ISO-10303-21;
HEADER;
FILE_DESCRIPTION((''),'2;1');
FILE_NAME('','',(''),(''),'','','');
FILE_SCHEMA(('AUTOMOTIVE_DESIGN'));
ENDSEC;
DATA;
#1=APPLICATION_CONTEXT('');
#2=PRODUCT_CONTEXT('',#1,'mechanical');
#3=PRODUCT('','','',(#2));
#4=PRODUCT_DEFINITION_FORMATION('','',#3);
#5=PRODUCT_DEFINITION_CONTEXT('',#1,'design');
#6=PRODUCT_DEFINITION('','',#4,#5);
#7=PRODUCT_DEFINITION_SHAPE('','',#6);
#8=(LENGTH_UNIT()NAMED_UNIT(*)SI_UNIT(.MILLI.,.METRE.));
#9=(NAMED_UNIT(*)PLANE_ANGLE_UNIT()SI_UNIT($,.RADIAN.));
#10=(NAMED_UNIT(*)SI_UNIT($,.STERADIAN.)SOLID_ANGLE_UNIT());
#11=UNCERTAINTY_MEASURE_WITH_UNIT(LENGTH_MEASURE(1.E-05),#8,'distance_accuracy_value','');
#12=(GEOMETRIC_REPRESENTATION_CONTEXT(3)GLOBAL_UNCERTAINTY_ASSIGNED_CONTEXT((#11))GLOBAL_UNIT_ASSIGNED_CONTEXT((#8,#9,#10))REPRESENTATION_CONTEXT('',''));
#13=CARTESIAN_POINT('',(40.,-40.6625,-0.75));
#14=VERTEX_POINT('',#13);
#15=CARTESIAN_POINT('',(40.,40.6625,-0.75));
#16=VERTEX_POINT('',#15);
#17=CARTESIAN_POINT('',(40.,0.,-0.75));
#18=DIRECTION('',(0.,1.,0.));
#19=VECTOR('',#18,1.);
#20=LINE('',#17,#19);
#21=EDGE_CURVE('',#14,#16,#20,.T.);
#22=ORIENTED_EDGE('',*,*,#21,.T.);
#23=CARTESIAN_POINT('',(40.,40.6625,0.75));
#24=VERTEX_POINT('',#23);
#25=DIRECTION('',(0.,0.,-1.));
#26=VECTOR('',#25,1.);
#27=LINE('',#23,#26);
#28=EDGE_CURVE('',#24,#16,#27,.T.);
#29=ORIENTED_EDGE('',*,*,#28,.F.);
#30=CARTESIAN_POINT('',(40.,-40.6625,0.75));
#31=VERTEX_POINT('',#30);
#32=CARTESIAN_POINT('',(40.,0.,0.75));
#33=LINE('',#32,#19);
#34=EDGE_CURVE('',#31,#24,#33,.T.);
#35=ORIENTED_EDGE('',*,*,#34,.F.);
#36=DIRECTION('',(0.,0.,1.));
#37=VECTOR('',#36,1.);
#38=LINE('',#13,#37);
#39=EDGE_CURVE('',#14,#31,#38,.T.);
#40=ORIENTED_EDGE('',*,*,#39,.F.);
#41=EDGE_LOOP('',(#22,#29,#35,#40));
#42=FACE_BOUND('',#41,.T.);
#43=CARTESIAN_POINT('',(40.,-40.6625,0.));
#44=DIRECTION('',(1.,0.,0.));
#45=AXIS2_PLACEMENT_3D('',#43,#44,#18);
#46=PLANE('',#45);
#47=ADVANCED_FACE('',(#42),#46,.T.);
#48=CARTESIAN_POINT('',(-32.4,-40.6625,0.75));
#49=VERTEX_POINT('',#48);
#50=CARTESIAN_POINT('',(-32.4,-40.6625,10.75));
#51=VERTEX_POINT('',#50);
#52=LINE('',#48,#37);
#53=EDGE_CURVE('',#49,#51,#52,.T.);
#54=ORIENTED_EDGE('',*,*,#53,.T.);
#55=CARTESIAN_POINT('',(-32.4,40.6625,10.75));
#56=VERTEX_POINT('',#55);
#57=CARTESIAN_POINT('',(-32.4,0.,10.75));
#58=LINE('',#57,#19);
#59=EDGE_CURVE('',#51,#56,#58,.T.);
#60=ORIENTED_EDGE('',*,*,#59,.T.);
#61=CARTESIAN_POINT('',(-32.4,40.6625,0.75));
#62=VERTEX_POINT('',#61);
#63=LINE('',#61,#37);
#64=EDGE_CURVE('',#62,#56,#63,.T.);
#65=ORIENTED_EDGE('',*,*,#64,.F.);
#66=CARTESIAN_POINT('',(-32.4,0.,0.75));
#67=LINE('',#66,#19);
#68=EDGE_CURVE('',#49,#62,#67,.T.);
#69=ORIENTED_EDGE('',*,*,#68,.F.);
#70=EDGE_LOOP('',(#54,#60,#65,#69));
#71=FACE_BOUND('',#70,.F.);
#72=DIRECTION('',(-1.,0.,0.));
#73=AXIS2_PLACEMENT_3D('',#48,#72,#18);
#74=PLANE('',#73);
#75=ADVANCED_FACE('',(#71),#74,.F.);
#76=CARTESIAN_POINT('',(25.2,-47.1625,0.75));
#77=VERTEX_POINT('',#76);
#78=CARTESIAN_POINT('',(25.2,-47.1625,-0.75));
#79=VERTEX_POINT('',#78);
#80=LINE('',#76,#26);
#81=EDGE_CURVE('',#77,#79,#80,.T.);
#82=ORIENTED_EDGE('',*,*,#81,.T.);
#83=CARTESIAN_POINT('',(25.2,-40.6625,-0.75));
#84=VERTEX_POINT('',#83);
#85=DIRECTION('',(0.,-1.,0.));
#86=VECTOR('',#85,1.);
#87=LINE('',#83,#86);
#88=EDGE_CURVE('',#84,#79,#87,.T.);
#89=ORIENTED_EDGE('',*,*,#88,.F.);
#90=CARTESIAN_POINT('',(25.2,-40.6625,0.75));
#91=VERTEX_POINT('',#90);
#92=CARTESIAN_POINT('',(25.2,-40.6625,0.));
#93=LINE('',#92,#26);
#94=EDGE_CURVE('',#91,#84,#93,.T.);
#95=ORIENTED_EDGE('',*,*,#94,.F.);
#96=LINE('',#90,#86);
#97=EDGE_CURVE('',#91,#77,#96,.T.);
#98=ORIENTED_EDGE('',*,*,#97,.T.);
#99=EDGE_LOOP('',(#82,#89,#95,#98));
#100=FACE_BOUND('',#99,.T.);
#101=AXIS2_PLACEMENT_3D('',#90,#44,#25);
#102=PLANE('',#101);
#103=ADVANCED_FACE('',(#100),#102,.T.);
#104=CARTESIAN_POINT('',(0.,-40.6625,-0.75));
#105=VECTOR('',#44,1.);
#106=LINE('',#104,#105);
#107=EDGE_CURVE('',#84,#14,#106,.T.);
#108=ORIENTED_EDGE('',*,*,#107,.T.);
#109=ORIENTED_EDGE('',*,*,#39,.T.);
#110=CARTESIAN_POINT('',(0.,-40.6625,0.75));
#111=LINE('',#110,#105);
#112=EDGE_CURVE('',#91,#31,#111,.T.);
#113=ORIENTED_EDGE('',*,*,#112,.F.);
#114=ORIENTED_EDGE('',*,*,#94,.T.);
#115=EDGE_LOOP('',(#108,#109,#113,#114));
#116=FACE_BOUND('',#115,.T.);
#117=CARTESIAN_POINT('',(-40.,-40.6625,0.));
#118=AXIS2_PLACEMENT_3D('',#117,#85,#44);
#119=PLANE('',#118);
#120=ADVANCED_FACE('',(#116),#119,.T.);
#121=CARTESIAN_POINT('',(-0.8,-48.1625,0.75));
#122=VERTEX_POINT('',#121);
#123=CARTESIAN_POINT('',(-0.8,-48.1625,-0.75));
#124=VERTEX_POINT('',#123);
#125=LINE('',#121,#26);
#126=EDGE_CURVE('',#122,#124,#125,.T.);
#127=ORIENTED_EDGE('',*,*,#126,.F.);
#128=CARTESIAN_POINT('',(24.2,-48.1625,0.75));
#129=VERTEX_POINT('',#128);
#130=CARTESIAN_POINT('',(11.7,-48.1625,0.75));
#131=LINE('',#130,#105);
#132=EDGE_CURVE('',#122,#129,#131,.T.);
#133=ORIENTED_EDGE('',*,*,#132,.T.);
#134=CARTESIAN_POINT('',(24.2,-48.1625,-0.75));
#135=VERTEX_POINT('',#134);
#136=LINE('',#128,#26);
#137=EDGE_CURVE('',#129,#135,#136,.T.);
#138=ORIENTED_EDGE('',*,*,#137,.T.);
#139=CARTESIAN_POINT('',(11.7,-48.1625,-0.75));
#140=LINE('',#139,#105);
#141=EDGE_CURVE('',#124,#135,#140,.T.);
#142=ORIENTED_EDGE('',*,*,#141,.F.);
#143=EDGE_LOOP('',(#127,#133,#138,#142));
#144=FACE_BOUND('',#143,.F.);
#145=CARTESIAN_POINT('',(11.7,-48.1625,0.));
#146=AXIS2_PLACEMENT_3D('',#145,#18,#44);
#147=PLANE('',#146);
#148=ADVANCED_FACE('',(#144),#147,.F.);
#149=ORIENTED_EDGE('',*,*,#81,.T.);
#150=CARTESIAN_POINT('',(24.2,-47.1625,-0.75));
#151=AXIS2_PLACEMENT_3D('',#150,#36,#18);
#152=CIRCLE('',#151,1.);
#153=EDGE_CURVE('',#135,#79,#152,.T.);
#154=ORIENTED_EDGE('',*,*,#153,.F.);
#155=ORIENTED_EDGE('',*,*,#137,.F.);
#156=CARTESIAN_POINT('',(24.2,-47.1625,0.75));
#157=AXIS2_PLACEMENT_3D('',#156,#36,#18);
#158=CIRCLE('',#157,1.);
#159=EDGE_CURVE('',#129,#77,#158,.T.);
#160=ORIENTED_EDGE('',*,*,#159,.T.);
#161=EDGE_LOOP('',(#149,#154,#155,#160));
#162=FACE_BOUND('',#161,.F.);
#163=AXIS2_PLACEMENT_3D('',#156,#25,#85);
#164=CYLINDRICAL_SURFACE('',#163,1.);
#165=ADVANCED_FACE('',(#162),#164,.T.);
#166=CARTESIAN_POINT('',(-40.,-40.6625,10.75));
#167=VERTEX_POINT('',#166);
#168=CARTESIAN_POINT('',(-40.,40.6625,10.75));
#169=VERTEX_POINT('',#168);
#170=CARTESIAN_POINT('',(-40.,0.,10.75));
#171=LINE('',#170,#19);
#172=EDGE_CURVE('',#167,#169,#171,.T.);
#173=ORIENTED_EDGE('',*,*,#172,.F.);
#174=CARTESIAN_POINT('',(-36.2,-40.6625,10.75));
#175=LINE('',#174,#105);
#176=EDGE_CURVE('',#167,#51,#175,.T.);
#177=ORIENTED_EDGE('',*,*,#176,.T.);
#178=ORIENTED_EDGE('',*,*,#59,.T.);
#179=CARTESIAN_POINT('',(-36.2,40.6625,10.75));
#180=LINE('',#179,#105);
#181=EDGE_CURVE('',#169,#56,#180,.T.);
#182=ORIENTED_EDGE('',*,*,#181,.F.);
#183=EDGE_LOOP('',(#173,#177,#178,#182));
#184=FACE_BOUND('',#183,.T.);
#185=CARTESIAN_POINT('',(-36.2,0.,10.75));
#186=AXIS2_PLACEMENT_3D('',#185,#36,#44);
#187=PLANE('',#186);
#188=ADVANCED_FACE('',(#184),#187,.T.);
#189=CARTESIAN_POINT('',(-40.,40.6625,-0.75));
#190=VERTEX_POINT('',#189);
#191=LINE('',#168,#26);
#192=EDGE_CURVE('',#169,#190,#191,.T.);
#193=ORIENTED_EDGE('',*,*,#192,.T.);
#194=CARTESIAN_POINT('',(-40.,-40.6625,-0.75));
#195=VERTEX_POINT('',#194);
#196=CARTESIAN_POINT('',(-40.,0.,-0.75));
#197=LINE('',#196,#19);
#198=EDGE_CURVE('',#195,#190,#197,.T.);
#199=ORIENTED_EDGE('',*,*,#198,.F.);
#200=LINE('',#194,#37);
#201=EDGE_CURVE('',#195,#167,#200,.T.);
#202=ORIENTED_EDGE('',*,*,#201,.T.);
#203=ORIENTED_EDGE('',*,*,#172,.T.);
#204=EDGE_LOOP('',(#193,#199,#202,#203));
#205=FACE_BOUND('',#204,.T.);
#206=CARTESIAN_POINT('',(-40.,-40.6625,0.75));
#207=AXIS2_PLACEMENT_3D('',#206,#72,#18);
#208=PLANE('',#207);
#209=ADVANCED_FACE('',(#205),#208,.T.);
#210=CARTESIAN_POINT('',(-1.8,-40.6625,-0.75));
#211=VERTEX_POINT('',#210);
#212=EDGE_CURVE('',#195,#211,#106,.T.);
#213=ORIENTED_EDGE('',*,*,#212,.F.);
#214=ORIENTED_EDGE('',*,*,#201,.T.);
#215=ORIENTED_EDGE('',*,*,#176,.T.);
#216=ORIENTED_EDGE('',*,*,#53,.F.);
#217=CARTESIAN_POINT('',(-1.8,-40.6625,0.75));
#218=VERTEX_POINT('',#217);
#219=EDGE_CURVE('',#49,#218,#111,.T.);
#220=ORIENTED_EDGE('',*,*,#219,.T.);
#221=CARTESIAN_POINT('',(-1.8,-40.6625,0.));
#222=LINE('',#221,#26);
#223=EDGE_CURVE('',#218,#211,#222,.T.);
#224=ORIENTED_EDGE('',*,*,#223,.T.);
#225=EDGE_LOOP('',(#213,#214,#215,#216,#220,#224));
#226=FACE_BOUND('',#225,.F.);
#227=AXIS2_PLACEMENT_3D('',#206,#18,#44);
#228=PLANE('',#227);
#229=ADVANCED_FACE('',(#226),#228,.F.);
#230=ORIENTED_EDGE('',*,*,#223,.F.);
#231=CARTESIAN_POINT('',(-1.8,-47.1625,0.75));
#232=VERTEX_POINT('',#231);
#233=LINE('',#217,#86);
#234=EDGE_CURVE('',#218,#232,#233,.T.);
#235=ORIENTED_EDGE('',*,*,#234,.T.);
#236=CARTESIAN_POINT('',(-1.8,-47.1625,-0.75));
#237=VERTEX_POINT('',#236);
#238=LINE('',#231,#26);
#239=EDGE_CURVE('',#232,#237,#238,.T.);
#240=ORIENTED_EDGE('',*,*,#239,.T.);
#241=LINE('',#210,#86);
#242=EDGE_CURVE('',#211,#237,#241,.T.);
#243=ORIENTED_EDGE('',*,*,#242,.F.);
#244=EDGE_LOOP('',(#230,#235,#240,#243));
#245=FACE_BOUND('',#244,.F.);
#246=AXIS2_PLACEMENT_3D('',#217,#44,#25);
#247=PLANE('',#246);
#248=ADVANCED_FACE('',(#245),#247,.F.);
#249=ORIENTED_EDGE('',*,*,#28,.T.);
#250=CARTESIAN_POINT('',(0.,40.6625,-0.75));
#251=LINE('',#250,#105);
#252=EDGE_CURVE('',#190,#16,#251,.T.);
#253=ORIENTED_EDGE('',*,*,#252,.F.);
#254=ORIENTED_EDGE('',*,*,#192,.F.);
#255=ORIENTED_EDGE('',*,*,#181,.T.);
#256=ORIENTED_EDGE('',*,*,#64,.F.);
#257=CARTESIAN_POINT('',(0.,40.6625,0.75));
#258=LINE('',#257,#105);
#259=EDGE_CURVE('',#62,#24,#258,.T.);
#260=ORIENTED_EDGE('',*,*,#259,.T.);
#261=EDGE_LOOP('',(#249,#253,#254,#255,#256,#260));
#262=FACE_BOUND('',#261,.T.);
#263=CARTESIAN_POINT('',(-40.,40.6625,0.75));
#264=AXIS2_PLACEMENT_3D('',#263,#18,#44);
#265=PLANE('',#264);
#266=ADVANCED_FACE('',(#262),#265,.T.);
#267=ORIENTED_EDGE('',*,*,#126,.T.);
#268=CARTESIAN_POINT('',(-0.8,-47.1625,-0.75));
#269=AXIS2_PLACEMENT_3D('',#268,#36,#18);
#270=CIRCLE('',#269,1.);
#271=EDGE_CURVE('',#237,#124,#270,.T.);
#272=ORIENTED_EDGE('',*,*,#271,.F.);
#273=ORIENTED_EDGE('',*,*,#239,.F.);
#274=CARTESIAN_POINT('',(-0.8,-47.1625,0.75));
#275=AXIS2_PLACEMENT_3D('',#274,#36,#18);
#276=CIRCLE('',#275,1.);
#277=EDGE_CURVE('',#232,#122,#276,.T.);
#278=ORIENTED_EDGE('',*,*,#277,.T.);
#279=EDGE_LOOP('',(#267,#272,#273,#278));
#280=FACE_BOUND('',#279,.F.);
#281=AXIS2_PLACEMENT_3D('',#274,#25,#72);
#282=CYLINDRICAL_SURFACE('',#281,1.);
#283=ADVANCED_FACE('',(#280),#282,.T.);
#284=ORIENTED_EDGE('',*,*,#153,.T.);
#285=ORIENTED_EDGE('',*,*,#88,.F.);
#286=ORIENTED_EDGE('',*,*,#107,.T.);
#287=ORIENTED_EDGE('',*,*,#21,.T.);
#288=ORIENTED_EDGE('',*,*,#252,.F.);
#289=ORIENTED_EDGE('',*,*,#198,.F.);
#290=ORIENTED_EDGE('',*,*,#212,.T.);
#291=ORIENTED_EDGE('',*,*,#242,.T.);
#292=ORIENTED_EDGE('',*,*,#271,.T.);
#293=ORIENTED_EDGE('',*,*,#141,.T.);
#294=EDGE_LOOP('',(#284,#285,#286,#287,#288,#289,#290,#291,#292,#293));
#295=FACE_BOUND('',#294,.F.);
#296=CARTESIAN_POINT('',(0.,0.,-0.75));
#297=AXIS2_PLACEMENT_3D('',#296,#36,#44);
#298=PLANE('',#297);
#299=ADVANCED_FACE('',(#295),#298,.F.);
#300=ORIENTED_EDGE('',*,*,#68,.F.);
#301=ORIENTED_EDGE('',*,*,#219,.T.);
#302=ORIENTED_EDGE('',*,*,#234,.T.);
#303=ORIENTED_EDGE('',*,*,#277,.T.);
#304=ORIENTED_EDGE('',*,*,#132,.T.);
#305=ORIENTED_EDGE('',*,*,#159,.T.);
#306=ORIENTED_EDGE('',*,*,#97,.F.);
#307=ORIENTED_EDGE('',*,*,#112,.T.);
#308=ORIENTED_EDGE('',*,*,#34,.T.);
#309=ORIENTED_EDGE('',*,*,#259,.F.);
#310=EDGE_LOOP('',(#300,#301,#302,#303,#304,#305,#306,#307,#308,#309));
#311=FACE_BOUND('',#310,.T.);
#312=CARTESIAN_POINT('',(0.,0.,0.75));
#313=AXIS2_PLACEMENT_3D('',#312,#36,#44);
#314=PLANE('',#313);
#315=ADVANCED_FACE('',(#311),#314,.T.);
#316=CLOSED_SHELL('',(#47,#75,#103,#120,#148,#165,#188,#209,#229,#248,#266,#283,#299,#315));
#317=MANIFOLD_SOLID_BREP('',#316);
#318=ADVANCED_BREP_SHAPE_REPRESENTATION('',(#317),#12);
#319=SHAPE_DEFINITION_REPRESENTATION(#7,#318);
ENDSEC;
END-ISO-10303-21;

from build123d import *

# Parameters (mm, degrees)
F0_W     = 80
F0_H     = 81.325
F1_DEPTH = 0.75
F3_E1_W  = 27
F3_E1_H  = 1.5
F4_DEPTH = 7.5
F5_R     = 1
F7_W     = 7.6
F7_H     = 81.325
F8_DEPTH = 10


# Not quite as in the source:
# - two fillets or chamfers of one size are made in one step


with BuildPart() as f1:
    # F0 (on Top) → F1 (new body, symmetric)
    with BuildSketch(Plane.XY):
        Rectangle(F0_W, F0_H)
    extrude(amount=F1_DEPTH, both=True)

    # F3_E1 (on explicit) → F4 (join)
    with BuildSketch(Plane(origin=(-1.8, -40.6625, 0.75), x_dir=(1, 0, 0), z_dir=(0, 1, 0))):
        with Locations((13.5, 0.75)):
            Rectangle(F3_E1_W, F3_E1_H)
    extrude(amount=-F4_DEPTH)

    # F5
    f5_edges = [f1.edges().sort_by_distance(p)[0] for p in [
        (-1.8, -48.1625, 0),
        (25.2, -48.1625, 0),
    ]]
    fillet(f5_edges, radius=F5_R)

    # F7 (on face) → F8 (join)
    with BuildSketch(Plane.XY.offset(0.75)):
        with Locations((-36.2, 0)):
            Rectangle(F7_W, F7_H)
    extrude(amount=F8_DEPTH)


solid = f1.part
